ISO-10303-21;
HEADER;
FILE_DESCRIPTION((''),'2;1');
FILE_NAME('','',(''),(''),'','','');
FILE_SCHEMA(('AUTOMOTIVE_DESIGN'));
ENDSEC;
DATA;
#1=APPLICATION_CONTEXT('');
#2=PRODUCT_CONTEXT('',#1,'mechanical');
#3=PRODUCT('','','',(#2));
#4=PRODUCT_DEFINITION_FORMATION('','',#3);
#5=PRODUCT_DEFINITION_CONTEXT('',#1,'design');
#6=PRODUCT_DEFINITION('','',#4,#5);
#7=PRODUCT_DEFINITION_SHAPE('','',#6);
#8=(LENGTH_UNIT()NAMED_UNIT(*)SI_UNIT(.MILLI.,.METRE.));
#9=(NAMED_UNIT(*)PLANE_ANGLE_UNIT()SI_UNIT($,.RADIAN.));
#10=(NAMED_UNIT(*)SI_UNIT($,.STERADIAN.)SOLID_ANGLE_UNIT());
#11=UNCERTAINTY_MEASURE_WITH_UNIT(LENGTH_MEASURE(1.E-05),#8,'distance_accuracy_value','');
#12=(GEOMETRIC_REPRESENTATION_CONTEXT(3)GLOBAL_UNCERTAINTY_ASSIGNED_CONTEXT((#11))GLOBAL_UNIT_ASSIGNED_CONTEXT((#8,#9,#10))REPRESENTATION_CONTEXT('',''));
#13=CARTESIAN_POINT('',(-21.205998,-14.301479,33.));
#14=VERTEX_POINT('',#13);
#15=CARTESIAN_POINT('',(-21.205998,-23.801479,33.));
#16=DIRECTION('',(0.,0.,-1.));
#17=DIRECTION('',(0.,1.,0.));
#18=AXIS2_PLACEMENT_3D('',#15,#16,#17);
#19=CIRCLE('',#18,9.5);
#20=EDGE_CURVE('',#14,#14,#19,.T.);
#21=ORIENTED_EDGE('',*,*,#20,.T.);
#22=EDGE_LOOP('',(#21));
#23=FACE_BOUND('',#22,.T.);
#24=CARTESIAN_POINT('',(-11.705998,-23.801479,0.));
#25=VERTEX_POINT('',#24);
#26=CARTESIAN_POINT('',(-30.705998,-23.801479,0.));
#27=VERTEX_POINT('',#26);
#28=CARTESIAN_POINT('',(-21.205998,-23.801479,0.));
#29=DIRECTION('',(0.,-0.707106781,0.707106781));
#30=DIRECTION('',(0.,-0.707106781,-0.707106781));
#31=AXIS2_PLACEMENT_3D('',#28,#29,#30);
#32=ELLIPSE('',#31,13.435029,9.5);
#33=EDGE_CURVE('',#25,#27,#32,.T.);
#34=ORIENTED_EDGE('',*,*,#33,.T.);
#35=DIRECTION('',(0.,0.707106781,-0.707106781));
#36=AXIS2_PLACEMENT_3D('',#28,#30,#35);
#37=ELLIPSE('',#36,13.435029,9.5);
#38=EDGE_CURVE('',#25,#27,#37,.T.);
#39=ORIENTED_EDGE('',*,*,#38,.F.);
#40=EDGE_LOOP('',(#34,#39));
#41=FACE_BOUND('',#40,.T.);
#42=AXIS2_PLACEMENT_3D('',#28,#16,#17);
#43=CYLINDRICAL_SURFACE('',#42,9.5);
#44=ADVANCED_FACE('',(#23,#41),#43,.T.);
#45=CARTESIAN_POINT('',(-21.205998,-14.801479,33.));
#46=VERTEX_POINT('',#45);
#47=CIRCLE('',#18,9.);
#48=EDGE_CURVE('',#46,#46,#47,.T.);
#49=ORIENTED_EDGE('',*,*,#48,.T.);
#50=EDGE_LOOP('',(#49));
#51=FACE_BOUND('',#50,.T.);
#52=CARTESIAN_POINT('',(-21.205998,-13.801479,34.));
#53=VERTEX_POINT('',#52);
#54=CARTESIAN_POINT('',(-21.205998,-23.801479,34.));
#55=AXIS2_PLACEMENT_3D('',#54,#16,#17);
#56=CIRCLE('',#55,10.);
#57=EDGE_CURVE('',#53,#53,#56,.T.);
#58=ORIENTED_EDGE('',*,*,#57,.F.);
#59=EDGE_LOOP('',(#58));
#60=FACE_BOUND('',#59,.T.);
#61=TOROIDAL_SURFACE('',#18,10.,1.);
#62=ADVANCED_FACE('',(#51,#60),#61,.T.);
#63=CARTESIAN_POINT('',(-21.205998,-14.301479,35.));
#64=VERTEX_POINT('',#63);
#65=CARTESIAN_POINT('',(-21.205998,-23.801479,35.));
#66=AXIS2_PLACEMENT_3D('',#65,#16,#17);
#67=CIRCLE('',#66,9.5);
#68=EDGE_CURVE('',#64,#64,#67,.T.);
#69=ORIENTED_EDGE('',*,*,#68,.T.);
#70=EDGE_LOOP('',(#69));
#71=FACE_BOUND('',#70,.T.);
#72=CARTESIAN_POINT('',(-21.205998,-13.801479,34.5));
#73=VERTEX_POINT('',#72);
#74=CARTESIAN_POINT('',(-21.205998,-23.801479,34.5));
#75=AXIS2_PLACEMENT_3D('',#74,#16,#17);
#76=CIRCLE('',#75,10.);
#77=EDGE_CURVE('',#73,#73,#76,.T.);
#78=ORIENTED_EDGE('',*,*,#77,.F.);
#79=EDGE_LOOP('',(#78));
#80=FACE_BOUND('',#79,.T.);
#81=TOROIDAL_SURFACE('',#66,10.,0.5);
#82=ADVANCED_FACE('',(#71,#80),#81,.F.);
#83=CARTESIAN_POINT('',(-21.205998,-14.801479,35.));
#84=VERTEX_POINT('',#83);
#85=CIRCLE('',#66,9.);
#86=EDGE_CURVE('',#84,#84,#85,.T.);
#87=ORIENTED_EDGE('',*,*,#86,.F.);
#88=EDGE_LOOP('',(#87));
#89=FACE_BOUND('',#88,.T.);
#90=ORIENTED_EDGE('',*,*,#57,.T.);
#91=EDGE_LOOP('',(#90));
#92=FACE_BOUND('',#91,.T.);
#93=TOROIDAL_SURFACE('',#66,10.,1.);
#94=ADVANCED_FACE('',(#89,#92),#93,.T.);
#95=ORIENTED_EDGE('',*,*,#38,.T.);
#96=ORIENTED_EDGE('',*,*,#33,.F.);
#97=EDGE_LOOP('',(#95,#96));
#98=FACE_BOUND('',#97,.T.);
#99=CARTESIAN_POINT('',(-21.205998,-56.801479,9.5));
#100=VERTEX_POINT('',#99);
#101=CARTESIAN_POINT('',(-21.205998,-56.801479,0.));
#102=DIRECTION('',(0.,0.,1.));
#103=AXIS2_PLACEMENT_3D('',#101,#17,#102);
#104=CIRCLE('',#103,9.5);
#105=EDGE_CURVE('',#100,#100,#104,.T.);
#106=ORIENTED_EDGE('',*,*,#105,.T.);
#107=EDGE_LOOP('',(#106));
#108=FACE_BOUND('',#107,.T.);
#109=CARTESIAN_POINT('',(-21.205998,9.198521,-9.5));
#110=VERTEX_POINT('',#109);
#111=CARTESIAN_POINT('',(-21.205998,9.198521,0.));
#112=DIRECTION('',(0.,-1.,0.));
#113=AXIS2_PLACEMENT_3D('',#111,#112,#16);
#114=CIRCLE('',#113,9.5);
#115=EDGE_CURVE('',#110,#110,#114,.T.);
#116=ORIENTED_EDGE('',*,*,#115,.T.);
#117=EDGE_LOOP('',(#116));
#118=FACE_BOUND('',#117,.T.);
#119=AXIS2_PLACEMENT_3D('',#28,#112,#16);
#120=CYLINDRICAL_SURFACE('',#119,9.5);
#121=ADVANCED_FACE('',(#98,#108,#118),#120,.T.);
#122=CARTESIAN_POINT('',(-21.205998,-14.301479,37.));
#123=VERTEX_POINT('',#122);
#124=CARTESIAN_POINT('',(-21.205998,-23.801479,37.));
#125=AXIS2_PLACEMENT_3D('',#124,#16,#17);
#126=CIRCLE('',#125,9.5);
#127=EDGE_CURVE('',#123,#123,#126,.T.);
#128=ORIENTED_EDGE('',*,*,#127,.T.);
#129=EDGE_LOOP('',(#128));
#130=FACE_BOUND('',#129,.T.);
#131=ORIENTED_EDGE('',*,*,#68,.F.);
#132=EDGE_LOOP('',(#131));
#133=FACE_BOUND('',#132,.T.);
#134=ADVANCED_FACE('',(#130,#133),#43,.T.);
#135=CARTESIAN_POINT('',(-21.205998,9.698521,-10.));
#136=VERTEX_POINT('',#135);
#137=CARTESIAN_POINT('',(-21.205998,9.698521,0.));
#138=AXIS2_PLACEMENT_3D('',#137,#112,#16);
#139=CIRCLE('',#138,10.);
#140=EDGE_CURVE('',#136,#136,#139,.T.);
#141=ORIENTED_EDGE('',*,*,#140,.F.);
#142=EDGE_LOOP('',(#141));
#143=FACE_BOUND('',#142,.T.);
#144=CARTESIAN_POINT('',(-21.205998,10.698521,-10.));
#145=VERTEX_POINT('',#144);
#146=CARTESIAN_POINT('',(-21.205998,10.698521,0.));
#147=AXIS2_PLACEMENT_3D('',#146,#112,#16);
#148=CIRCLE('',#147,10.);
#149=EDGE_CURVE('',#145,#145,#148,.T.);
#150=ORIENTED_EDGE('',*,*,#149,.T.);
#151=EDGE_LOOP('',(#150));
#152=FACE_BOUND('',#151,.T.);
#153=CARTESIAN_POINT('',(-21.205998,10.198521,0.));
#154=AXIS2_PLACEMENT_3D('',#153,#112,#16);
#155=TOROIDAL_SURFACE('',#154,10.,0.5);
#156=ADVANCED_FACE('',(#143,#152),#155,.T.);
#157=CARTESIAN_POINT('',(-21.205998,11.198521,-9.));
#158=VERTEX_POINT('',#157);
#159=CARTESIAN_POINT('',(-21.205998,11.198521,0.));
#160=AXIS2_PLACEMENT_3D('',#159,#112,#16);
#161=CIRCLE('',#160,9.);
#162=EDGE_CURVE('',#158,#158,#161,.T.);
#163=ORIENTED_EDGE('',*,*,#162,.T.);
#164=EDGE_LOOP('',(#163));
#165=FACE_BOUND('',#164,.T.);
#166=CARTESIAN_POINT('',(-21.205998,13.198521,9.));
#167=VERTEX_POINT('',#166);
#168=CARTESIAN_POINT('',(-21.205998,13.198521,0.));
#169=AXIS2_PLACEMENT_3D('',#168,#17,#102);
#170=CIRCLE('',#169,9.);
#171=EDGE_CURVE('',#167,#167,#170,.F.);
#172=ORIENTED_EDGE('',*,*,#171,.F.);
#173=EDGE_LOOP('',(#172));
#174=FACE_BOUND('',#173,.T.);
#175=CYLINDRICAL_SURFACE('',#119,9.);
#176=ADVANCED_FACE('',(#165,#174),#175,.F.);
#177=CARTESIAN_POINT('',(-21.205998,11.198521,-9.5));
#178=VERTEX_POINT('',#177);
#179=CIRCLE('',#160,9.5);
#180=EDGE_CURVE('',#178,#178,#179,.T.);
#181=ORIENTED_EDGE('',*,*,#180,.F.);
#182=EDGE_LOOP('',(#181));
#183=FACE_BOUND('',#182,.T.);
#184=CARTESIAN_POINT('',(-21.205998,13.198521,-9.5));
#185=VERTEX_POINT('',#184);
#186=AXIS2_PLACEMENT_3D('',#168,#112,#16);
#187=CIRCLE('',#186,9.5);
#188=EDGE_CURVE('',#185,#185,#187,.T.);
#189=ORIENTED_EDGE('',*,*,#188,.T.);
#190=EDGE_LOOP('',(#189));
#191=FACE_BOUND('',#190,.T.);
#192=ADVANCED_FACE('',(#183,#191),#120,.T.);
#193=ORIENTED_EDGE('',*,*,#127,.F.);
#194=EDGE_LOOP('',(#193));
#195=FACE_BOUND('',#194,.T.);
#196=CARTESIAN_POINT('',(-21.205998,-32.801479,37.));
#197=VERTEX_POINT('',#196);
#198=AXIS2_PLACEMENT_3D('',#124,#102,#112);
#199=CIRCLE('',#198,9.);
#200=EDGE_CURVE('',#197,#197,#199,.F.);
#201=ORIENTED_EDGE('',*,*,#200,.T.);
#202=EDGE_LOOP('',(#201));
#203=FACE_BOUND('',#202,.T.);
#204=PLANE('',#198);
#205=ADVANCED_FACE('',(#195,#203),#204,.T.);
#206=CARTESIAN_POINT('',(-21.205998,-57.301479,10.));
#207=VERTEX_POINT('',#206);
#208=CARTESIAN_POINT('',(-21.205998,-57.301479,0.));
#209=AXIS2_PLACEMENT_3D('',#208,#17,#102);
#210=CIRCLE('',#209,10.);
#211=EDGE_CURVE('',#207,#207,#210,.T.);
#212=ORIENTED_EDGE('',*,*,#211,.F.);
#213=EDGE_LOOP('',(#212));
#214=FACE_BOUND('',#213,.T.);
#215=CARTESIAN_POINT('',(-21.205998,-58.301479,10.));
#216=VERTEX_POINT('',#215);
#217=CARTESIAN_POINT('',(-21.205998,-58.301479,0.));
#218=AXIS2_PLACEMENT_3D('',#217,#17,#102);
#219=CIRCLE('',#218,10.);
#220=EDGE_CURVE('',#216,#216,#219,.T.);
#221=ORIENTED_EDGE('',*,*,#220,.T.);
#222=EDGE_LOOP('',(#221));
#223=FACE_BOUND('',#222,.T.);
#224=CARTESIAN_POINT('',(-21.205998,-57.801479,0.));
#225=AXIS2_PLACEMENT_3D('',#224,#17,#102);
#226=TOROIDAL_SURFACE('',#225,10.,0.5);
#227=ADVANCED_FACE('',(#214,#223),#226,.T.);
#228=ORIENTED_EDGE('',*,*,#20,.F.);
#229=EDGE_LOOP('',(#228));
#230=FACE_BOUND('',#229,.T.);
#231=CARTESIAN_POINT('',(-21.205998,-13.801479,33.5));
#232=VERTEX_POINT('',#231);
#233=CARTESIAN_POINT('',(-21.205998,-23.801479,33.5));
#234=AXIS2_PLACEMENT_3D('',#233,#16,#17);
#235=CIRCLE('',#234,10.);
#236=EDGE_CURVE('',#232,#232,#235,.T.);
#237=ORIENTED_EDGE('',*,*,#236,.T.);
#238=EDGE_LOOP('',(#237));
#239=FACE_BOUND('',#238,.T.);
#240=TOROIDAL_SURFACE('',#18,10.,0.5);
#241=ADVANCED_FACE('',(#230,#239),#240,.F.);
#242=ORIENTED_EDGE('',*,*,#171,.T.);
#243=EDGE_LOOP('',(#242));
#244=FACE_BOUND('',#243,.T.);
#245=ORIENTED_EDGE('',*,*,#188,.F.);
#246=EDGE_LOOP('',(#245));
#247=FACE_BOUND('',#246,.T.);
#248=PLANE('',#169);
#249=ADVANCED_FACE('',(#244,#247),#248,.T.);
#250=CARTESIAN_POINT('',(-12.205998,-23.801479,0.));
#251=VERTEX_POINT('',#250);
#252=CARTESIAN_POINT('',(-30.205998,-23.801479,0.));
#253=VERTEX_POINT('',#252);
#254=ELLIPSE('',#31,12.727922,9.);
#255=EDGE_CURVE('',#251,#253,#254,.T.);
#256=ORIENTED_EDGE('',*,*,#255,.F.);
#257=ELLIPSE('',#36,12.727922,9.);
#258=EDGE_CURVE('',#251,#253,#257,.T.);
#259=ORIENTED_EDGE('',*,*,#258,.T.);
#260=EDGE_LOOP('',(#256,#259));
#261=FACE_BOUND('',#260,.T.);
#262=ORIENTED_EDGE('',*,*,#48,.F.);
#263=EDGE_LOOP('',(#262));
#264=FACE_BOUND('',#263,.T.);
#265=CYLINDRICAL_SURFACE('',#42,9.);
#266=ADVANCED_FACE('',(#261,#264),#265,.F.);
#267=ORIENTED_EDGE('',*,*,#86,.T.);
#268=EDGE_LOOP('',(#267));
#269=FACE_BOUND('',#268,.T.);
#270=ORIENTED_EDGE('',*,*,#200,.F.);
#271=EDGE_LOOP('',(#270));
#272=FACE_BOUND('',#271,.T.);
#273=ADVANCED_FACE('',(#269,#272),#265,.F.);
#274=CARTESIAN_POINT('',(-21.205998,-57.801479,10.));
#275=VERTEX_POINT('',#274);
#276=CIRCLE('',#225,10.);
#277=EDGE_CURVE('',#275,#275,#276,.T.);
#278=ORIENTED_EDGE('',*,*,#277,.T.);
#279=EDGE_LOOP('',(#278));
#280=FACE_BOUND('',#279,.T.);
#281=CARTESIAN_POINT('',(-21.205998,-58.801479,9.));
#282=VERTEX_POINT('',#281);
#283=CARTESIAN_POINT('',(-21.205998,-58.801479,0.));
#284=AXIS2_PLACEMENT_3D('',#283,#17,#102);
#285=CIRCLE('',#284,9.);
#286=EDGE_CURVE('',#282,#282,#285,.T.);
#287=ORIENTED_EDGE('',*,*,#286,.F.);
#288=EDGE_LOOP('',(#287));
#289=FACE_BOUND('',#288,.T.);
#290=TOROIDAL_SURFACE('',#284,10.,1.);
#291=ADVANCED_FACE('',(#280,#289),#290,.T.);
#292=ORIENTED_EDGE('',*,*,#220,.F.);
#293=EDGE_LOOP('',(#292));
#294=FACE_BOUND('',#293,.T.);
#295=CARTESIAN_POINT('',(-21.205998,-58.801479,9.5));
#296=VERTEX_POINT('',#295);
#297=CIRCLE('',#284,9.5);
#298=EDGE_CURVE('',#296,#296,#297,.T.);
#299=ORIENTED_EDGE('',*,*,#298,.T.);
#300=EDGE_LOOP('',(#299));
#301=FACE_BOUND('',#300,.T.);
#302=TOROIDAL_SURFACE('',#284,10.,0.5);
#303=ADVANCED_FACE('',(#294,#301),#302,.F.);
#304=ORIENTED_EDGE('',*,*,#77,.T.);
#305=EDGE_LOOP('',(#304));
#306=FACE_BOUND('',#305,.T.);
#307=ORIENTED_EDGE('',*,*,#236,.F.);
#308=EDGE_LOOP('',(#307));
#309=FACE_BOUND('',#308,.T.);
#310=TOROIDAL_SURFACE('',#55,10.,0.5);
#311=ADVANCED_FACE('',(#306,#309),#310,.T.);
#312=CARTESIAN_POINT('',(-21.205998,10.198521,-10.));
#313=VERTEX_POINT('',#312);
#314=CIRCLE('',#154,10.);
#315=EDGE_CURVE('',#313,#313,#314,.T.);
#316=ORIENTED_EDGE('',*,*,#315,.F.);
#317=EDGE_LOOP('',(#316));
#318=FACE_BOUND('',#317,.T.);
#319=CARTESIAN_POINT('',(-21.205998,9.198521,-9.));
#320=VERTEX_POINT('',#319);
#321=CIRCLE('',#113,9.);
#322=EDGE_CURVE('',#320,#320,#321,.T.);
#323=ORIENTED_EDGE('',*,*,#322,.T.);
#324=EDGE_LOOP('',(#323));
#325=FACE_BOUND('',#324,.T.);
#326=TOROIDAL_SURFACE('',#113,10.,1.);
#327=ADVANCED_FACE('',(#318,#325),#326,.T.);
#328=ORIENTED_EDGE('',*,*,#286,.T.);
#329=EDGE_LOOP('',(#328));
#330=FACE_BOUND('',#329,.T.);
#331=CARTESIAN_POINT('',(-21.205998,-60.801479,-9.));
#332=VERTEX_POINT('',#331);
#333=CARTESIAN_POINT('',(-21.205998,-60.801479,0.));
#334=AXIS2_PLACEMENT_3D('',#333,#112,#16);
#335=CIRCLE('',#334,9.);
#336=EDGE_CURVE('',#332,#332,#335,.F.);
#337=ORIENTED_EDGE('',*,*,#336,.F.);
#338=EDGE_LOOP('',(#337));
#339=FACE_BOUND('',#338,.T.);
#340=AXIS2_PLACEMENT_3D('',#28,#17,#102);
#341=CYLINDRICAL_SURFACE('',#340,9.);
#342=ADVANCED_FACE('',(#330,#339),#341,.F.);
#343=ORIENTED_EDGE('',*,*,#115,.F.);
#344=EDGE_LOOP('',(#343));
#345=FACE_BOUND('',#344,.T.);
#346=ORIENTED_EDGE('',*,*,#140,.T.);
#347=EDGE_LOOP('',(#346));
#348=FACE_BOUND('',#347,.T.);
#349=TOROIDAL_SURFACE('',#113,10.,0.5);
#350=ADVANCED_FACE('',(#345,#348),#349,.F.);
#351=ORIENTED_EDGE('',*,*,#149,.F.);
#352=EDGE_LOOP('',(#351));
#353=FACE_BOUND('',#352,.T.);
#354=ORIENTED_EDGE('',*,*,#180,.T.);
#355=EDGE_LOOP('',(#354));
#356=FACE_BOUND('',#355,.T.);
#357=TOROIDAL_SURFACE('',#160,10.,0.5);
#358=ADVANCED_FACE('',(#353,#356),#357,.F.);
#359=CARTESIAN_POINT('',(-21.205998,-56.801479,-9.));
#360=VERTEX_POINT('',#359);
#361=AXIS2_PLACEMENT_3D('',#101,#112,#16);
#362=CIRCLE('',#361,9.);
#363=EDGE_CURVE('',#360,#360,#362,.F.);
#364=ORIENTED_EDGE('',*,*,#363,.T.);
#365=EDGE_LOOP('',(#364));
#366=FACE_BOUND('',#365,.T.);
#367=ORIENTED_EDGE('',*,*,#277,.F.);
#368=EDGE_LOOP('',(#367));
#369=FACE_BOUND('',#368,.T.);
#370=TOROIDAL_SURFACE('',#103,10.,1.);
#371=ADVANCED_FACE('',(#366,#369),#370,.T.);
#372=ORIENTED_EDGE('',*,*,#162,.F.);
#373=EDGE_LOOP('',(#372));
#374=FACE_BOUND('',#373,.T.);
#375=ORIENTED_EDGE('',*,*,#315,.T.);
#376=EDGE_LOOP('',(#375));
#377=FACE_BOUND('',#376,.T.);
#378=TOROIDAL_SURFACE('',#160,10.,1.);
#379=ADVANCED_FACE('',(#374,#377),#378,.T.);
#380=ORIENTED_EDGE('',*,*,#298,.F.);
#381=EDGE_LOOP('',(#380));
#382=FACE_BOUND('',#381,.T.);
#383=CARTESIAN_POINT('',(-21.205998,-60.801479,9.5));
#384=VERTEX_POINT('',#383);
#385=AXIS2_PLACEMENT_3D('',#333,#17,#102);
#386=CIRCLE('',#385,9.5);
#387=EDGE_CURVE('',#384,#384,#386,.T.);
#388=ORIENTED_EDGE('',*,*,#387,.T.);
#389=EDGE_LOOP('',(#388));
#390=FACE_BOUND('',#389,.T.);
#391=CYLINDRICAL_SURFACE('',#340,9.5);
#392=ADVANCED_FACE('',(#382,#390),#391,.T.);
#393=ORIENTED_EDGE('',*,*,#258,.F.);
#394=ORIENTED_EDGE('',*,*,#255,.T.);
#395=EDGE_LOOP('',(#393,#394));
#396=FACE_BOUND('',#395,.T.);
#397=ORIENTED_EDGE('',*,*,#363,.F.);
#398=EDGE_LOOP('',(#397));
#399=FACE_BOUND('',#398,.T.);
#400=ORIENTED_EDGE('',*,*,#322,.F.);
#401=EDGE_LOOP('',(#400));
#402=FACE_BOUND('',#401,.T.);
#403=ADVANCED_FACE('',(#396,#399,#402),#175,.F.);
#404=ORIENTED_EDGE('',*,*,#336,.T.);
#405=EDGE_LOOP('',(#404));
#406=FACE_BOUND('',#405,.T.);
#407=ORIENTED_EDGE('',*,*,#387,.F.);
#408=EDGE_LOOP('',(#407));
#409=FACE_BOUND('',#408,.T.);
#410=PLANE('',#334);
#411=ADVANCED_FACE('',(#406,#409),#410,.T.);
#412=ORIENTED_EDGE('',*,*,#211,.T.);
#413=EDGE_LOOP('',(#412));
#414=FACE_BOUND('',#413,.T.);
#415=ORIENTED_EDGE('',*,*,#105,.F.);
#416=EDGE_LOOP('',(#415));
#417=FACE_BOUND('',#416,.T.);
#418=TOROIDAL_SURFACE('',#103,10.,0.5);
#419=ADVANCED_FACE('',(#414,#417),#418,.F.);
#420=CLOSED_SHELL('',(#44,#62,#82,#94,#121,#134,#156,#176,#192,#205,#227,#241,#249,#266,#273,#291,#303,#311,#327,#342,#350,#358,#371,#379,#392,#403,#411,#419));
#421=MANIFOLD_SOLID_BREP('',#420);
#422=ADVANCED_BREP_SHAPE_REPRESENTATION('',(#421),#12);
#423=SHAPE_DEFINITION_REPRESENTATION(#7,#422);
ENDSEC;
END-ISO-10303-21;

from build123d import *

# Parameters (mm, degrees)
CIRPATTERN1_COUNT = 3
CIRPATTERN1_ANGLE = 180


with BuildPart() as part:
    # Sketch1 → Revolve1 (revolve)
    with BuildSketch(Plane.XY, mode=Mode.PRIVATE) as revolve1_sk:
        with BuildLine():
            Line((-21.205998339, 13.198521386), (-11.705998339, 13.198521386))
            Line((-11.705998339, 13.198521386), (-11.705998339, 11.198521386))
            ThreePointArc((-11.705998339, 11.198521386), (-11.559551729, 10.844967995), (-11.205998339, 10.698521386))
            ThreePointArc((-11.205998339, 10.698521386), (-10.705998339, 10.198521386), (-11.205998339, 9.698521386))
            ThreePointArc((-11.205998339, 9.698521386), (-11.559551729, 9.552074776), (-11.705998339, 9.198521386))
            Line((-11.705998339, 9.198521386), (-11.705998339, -23.801478614))
            Line((-11.705998339, -23.801478614), (-21.205998339, -23.801478614))
            Line((-21.205998339, -23.801478614), (-21.205998339, 13.198521386))
        make_face()
    revolve1 = revolve(revolve1_sk.sketch.rotate(Axis((-21.205998339, -23.801478614, 0), (0, 1, 0)), 90), axis=Axis((-21.205998339, -23.801478614, 0), (0, 1, 0)))

    # CirPattern1: Revolve1 ×3 about axis
    cirpattern1_axis = Axis((0, -23.801478614, 0), (1, 0, 0))
    for i in range(1, CIRPATTERN1_COUNT):
        add(revolve1.rotate(cirpattern1_axis, i * CIRPATTERN1_ANGLE / (CIRPATTERN1_COUNT - 1)))

    # Shell1: read off the stored shape, not the designer's step
    # Shell1 outline → Shell1 (revolve, cut)
    with BuildSketch(Plane(origin=(-21.205998339, 0, 0), x_dir=(1, 0, 0), z_dir=(0, 0, 1))):
        with BuildLine():
            ThreePointArc((10, 10.198521386), (9.292893219, 10.491414605), (9, 11.198521386))
            Line((9, 11.198521386), (9, 13.198521386))
            Line((9, 13.198521386), (0, 13.198521386))
            Line((0, 13.198521386), (0, -60.801478614))
            Line((0, -60.801478614), (9, -60.801478614))
            Line((9, -60.801478614), (9, -58.801478614))
            ThreePointArc((9, -58.801478614), (9.292893219, -58.094371833), (10, -57.801478614))
            ThreePointArc((10, -57.801478614), (9.292893219, -57.508585395), (9, -56.801478614))
            Line((9, -56.801478614), (9, 9.198521386))
            ThreePointArc((9, 9.198521386), (9.292893219, 9.905628167), (10, 10.198521386))
        make_face()
    revolve(axis=Axis((-21.205998339, 0, 0), (0, 1, 0)), mode=Mode.SUBTRACT)

    # Shell1 2 outline → Shell1 2 (revolve, cut)
    with BuildSketch(Plane(origin=(-21.205998339, -23.801478614, 0), x_dir=(1, 0, 0), z_dir=(0, -1, 0))):
        with BuildLine():
            Line((9, 35), (9, 37))
            Line((9, 37), (0, 37))
            Line((0, 37), (0, 0))
            Line((0, 0), (9, 0))
            Line((9, 0), (9, 33))
            ThreePointArc((9, 33), (9.292893219, 33.707106781), (10, 34))
            ThreePointArc((10, 34), (9.292893219, 34.292893219), (9, 35))
        make_face()
    revolve(axis=Axis((-21.205998339, -23.801478614, 0), (0, 0, 1)), mode=Mode.SUBTRACT)


solid = part.part
